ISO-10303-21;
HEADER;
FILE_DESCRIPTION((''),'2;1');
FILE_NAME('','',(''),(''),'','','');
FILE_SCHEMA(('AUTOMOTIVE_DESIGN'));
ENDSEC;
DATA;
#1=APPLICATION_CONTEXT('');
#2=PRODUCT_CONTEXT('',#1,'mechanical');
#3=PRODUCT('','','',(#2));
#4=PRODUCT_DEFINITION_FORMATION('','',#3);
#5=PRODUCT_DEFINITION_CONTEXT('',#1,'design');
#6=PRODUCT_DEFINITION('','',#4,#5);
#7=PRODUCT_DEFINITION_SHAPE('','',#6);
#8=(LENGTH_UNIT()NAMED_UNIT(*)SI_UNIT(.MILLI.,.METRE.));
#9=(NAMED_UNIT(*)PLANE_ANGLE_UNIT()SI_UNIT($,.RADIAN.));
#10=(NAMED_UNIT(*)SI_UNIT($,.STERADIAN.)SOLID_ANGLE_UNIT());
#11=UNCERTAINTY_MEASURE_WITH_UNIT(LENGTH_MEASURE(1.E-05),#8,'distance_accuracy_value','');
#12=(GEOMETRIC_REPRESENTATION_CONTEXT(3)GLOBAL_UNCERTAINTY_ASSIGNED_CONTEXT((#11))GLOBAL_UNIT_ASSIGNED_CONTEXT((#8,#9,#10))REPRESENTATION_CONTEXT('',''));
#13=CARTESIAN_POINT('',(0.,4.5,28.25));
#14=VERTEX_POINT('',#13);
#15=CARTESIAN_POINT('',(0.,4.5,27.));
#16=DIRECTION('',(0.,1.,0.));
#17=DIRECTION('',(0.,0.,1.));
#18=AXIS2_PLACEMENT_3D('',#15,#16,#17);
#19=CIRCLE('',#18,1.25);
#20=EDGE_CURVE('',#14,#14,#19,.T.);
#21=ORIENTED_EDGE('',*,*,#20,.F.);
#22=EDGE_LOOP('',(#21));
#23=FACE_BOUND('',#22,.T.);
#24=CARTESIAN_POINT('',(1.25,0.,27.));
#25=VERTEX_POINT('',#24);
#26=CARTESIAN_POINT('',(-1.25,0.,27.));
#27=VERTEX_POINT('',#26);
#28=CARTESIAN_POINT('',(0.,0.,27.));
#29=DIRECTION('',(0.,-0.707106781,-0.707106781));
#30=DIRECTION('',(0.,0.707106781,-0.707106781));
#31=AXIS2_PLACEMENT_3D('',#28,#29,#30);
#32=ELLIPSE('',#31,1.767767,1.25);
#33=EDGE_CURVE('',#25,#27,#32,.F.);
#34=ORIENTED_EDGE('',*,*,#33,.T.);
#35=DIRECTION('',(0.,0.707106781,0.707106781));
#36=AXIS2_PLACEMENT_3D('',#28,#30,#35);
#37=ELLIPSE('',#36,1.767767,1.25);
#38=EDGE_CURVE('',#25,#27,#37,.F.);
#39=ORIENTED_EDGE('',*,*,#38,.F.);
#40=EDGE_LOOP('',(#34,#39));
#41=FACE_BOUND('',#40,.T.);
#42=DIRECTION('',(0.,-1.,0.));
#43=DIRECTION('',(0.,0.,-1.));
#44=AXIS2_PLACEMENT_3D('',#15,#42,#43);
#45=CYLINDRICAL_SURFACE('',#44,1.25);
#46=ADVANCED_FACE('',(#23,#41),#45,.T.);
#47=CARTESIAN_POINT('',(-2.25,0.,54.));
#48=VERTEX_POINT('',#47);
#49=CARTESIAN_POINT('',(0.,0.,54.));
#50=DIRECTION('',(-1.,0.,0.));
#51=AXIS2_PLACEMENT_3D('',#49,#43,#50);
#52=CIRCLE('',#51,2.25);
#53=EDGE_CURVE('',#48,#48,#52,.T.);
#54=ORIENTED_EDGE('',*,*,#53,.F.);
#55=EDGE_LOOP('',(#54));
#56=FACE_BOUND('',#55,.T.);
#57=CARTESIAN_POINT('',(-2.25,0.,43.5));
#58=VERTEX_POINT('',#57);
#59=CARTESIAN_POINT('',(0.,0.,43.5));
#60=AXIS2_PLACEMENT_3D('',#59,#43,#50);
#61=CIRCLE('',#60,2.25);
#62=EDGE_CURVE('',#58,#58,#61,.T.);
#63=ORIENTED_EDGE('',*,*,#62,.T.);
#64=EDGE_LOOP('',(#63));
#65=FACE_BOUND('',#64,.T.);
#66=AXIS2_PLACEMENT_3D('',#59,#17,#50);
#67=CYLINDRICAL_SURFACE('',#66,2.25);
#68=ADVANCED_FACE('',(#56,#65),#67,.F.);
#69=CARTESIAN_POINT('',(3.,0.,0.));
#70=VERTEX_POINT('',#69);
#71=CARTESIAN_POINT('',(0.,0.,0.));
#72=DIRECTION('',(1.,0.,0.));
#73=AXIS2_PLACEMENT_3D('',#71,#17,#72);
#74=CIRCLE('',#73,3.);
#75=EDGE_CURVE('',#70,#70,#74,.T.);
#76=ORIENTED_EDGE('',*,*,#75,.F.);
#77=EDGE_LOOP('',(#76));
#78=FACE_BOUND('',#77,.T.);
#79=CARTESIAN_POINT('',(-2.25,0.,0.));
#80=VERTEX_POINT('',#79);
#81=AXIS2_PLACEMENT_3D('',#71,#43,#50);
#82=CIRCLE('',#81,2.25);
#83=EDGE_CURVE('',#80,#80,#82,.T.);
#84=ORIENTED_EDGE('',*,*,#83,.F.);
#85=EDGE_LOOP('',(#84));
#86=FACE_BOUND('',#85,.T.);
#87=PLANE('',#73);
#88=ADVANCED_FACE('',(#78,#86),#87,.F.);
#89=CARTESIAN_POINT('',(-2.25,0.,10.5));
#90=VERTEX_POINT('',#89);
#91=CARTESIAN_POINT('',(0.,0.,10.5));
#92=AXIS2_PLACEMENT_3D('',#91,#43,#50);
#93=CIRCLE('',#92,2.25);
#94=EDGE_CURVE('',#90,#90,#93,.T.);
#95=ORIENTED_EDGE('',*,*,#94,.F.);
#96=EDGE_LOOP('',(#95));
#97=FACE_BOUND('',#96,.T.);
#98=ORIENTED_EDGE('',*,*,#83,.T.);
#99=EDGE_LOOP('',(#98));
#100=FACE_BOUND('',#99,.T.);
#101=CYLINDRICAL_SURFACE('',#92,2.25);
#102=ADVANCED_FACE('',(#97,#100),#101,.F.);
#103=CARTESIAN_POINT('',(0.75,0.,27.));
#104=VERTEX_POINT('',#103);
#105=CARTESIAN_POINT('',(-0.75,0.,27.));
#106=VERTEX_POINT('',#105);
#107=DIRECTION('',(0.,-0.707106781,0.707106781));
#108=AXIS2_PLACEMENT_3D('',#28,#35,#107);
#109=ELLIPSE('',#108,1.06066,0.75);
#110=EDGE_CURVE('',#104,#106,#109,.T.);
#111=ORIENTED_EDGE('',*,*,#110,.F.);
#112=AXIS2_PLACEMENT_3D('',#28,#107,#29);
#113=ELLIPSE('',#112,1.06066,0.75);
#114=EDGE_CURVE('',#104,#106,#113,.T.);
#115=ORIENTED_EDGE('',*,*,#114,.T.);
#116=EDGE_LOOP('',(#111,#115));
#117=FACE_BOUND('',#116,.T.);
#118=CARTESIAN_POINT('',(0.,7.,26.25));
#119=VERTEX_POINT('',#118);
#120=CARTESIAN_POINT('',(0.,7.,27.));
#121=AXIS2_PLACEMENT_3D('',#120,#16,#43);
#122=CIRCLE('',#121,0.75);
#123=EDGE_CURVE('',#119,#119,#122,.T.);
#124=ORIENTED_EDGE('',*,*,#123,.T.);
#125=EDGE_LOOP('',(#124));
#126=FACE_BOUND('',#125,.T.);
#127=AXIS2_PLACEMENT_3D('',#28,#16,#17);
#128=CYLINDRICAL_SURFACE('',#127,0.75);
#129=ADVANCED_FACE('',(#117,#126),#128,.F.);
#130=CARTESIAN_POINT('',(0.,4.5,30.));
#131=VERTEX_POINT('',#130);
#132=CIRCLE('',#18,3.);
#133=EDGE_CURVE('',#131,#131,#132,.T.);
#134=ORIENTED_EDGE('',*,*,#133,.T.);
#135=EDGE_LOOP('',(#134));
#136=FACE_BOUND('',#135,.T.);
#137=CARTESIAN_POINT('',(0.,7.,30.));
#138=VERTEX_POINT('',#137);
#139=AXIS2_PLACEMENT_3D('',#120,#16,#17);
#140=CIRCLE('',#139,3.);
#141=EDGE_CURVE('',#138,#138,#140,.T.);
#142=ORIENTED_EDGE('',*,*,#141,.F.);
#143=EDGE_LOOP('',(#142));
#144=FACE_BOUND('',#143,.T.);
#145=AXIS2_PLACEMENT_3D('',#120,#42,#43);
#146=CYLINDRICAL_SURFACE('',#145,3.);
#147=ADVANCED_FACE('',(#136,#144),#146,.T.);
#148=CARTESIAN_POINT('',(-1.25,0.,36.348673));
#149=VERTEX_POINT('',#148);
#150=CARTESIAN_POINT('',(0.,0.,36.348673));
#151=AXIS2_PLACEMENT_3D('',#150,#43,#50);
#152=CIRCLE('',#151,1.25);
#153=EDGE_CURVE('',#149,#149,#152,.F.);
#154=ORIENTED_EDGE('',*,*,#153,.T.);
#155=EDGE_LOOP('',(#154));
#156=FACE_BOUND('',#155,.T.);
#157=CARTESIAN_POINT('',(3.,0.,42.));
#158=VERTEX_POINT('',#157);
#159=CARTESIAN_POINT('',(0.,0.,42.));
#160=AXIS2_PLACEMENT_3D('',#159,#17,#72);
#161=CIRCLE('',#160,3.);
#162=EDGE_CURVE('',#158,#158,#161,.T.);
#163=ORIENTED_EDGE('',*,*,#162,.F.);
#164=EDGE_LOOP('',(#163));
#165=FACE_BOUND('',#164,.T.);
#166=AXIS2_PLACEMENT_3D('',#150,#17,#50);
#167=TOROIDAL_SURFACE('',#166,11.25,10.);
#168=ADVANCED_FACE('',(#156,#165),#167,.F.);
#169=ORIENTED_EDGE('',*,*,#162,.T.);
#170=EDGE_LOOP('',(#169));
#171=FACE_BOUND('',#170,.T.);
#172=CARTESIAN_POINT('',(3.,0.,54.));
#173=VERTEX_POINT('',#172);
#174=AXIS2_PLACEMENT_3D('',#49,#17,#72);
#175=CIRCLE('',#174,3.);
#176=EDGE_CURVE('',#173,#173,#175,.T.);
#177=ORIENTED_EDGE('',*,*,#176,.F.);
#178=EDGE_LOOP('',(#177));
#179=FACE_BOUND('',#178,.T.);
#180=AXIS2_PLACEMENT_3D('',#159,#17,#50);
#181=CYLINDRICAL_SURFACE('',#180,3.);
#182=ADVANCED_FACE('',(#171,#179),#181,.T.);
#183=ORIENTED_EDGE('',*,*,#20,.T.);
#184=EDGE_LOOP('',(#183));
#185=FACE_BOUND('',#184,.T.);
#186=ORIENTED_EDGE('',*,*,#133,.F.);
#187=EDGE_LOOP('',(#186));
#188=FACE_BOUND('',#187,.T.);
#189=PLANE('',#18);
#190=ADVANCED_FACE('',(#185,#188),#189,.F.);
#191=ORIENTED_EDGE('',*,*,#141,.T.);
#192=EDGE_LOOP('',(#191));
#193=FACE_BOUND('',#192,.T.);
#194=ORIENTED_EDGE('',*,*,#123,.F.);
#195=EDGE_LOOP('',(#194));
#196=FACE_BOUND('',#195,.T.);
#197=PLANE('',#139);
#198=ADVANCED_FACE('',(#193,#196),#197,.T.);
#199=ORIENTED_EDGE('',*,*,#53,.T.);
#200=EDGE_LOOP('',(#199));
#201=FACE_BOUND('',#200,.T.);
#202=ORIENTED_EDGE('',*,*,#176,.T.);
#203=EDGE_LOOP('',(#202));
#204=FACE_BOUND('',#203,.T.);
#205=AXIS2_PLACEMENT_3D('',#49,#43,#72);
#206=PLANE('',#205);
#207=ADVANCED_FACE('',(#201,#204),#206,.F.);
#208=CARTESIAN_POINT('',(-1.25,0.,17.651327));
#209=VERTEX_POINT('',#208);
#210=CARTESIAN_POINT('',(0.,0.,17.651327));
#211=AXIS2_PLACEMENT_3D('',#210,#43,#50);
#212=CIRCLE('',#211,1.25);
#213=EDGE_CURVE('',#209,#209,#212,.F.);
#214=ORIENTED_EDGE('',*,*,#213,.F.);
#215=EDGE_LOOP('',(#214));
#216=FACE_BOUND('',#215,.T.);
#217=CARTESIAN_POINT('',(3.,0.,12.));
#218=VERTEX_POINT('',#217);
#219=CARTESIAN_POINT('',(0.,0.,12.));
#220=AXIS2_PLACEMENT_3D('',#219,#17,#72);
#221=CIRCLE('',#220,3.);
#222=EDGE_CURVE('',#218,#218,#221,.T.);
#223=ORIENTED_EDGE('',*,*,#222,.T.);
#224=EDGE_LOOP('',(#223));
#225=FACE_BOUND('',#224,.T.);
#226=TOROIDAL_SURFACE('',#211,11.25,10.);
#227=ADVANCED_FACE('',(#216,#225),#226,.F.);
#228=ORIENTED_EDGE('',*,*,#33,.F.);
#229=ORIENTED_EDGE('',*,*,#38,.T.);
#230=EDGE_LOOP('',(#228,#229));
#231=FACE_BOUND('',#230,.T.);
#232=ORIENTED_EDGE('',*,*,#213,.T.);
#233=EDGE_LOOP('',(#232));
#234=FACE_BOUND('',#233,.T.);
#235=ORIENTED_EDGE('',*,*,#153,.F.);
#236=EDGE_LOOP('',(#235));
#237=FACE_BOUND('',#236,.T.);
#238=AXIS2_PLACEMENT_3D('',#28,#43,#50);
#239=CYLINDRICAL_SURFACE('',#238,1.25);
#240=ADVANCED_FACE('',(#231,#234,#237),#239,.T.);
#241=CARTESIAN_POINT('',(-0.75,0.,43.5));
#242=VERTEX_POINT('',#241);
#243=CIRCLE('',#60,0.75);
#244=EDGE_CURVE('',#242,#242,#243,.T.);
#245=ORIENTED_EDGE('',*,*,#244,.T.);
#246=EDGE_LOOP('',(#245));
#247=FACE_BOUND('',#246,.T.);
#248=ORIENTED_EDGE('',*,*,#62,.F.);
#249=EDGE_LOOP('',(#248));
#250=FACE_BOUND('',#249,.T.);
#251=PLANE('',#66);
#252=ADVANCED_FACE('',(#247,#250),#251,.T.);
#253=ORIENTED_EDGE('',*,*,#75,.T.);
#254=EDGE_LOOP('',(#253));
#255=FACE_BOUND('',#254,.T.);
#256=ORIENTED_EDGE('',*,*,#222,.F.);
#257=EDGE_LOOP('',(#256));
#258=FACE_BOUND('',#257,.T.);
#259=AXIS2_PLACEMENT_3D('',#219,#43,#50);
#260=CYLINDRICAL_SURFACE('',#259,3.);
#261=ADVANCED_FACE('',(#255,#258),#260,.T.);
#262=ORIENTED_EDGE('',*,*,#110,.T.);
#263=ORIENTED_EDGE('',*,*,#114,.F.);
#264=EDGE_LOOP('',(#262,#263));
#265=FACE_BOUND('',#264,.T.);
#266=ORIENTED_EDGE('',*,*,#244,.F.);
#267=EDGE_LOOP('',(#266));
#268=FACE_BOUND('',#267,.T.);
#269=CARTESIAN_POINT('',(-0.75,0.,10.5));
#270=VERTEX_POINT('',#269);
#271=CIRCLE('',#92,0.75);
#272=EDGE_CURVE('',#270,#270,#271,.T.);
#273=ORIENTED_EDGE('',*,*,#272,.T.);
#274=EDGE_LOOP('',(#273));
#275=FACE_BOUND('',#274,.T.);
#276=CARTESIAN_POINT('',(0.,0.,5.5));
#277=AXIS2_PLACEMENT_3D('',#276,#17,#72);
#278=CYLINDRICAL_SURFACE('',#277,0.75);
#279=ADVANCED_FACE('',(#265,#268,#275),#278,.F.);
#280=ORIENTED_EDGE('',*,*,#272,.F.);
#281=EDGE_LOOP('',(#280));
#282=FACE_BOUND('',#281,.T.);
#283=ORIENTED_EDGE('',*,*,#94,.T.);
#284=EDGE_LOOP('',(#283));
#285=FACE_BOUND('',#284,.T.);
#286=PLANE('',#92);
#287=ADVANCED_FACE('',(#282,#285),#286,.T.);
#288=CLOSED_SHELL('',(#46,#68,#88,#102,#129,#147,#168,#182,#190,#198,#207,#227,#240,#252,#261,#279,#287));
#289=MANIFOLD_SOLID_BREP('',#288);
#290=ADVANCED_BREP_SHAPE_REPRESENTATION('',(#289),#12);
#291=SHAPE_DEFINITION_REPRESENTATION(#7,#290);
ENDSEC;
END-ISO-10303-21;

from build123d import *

# Parameters (mm, degrees)
SKETCH1_R           = 3
BOSS_EXTRUDE1_DEPTH = 12
SKETCH2_R           = 1.25
BOSS_EXTRUDE2_DEPTH = 15
BOSS_EXTRUDE3_DEPTH = 4.5
BOSS_EXTRUDE4_DEPTH = 2.5
SKETCH5_R           = 2.25
CUT_EXTRUDE1_DEPTH  = 10.5
SKETCH6_R           = 0.75
CUT_EXTRUDE2_DEPTH  = 21.5
CUT_EXTRUDE3_DEPTH  = 7
FILLET1_R           = 10


with BuildPart() as part:
    # Sketch1 → Boss-Extrude1 (new body)
    with BuildSketch(Plane.XY):
        Circle(SKETCH1_R)
    extrude(amount=BOSS_EXTRUDE1_DEPTH)

    # Sketch2 → Boss-Extrude2 (add)
    with BuildSketch(Plane.XY.offset(12)):
        Circle(SKETCH2_R)
    extrude(amount=BOSS_EXTRUDE2_DEPTH)

    # Sketch3 → Boss-Extrude3 (add)
    with BuildSketch(Plane(origin=(0, 0, 0), x_dir=(1, 0, 0), z_dir=(0, 1, 0))):
        with BuildLine():
            Line((-1.25, -27), (1.25, -27))
            ThreePointArc((1.25, -27), (0, -25.75), (-1.25, -27))
        make_face()
    extrude(amount=BOSS_EXTRUDE3_DEPTH)

    # Sketch4 → Boss-Extrude4 (add)
    with BuildSketch(Plane(origin=(0, 4.5, 0), x_dir=(1, 0, 0), z_dir=(0, 1, 0))):
        with BuildLine():
            Line((-3, -27), (3, -27))
            ThreePointArc((3, -27), (0, -24), (-3, -27))
        make_face()
    extrude(amount=BOSS_EXTRUDE4_DEPTH)

    # Sketch5 → Cut-Extrude1 (cut)
    with BuildSketch(Plane(origin=(0, 0, 0), x_dir=(-1, 0, 0), z_dir=(0, 0, -1))):
        Circle(SKETCH5_R)
    extrude(amount=-CUT_EXTRUDE1_DEPTH, mode=Mode.SUBTRACT)

    # Sketch6 → Cut-Extrude2 (cut)
    with BuildSketch(Plane.XY.offset(27)):
        Circle(SKETCH6_R)
    extrude(amount=-CUT_EXTRUDE2_DEPTH, mode=Mode.SUBTRACT)

    # Sketch7 → Cut-Extrude3 (cut)
    with BuildSketch(Plane(origin=(0, 7, 0), x_dir=(1, 0, 0), z_dir=(0, 1, 0))):
        with BuildLine():
            Line((-0.75, -27), (-0.75, -27.055459171))
            Line((-0.75, -27.055459171), (0.75, -27.055459171))
            Line((0.75, -27.055459171), (0.75, -27))
            ThreePointArc((0.75, -27), (0, -26.25), (-0.75, -27))
        make_face()
    extrude(amount=-CUT_EXTRUDE3_DEPTH, mode=Mode.SUBTRACT)

    # Fillet1
    # the kernel refuses this fillet: 10 mm, written as the material it adds along each edge
    with BuildSketch(Plane(origin=(0, 0, 12), x_dir=(1, 0, 0), z_dir=(0, -1, 0))) as fillet1_piece_1:
        with BuildLine():
            CenterArc((11.25, 5.651327278), FILLET1_R, 180, 34.41150867)
            Line((3, 0), (2.835, -0.113026546))
            ThreePointArc((2.835, -0.113026546), (2.125, -0.2), (1.25, -0.2))
            Line((1.25, -0.2), (1.05, 0))
            Line((1.05, 0), (1.05, 5.651327278))
            Line((1.05, 5.651327278), (1.25, 5.651327278))
        make_face()
    revolve(axis=Axis((0, 0, 12), (0, 0, 1)))

    # Mirror5: part across plane


with BuildPart() as part_1:
    add(part.part)
    add(part.part.mirror(Plane.XY.offset(27)))


solid = part_1.part
